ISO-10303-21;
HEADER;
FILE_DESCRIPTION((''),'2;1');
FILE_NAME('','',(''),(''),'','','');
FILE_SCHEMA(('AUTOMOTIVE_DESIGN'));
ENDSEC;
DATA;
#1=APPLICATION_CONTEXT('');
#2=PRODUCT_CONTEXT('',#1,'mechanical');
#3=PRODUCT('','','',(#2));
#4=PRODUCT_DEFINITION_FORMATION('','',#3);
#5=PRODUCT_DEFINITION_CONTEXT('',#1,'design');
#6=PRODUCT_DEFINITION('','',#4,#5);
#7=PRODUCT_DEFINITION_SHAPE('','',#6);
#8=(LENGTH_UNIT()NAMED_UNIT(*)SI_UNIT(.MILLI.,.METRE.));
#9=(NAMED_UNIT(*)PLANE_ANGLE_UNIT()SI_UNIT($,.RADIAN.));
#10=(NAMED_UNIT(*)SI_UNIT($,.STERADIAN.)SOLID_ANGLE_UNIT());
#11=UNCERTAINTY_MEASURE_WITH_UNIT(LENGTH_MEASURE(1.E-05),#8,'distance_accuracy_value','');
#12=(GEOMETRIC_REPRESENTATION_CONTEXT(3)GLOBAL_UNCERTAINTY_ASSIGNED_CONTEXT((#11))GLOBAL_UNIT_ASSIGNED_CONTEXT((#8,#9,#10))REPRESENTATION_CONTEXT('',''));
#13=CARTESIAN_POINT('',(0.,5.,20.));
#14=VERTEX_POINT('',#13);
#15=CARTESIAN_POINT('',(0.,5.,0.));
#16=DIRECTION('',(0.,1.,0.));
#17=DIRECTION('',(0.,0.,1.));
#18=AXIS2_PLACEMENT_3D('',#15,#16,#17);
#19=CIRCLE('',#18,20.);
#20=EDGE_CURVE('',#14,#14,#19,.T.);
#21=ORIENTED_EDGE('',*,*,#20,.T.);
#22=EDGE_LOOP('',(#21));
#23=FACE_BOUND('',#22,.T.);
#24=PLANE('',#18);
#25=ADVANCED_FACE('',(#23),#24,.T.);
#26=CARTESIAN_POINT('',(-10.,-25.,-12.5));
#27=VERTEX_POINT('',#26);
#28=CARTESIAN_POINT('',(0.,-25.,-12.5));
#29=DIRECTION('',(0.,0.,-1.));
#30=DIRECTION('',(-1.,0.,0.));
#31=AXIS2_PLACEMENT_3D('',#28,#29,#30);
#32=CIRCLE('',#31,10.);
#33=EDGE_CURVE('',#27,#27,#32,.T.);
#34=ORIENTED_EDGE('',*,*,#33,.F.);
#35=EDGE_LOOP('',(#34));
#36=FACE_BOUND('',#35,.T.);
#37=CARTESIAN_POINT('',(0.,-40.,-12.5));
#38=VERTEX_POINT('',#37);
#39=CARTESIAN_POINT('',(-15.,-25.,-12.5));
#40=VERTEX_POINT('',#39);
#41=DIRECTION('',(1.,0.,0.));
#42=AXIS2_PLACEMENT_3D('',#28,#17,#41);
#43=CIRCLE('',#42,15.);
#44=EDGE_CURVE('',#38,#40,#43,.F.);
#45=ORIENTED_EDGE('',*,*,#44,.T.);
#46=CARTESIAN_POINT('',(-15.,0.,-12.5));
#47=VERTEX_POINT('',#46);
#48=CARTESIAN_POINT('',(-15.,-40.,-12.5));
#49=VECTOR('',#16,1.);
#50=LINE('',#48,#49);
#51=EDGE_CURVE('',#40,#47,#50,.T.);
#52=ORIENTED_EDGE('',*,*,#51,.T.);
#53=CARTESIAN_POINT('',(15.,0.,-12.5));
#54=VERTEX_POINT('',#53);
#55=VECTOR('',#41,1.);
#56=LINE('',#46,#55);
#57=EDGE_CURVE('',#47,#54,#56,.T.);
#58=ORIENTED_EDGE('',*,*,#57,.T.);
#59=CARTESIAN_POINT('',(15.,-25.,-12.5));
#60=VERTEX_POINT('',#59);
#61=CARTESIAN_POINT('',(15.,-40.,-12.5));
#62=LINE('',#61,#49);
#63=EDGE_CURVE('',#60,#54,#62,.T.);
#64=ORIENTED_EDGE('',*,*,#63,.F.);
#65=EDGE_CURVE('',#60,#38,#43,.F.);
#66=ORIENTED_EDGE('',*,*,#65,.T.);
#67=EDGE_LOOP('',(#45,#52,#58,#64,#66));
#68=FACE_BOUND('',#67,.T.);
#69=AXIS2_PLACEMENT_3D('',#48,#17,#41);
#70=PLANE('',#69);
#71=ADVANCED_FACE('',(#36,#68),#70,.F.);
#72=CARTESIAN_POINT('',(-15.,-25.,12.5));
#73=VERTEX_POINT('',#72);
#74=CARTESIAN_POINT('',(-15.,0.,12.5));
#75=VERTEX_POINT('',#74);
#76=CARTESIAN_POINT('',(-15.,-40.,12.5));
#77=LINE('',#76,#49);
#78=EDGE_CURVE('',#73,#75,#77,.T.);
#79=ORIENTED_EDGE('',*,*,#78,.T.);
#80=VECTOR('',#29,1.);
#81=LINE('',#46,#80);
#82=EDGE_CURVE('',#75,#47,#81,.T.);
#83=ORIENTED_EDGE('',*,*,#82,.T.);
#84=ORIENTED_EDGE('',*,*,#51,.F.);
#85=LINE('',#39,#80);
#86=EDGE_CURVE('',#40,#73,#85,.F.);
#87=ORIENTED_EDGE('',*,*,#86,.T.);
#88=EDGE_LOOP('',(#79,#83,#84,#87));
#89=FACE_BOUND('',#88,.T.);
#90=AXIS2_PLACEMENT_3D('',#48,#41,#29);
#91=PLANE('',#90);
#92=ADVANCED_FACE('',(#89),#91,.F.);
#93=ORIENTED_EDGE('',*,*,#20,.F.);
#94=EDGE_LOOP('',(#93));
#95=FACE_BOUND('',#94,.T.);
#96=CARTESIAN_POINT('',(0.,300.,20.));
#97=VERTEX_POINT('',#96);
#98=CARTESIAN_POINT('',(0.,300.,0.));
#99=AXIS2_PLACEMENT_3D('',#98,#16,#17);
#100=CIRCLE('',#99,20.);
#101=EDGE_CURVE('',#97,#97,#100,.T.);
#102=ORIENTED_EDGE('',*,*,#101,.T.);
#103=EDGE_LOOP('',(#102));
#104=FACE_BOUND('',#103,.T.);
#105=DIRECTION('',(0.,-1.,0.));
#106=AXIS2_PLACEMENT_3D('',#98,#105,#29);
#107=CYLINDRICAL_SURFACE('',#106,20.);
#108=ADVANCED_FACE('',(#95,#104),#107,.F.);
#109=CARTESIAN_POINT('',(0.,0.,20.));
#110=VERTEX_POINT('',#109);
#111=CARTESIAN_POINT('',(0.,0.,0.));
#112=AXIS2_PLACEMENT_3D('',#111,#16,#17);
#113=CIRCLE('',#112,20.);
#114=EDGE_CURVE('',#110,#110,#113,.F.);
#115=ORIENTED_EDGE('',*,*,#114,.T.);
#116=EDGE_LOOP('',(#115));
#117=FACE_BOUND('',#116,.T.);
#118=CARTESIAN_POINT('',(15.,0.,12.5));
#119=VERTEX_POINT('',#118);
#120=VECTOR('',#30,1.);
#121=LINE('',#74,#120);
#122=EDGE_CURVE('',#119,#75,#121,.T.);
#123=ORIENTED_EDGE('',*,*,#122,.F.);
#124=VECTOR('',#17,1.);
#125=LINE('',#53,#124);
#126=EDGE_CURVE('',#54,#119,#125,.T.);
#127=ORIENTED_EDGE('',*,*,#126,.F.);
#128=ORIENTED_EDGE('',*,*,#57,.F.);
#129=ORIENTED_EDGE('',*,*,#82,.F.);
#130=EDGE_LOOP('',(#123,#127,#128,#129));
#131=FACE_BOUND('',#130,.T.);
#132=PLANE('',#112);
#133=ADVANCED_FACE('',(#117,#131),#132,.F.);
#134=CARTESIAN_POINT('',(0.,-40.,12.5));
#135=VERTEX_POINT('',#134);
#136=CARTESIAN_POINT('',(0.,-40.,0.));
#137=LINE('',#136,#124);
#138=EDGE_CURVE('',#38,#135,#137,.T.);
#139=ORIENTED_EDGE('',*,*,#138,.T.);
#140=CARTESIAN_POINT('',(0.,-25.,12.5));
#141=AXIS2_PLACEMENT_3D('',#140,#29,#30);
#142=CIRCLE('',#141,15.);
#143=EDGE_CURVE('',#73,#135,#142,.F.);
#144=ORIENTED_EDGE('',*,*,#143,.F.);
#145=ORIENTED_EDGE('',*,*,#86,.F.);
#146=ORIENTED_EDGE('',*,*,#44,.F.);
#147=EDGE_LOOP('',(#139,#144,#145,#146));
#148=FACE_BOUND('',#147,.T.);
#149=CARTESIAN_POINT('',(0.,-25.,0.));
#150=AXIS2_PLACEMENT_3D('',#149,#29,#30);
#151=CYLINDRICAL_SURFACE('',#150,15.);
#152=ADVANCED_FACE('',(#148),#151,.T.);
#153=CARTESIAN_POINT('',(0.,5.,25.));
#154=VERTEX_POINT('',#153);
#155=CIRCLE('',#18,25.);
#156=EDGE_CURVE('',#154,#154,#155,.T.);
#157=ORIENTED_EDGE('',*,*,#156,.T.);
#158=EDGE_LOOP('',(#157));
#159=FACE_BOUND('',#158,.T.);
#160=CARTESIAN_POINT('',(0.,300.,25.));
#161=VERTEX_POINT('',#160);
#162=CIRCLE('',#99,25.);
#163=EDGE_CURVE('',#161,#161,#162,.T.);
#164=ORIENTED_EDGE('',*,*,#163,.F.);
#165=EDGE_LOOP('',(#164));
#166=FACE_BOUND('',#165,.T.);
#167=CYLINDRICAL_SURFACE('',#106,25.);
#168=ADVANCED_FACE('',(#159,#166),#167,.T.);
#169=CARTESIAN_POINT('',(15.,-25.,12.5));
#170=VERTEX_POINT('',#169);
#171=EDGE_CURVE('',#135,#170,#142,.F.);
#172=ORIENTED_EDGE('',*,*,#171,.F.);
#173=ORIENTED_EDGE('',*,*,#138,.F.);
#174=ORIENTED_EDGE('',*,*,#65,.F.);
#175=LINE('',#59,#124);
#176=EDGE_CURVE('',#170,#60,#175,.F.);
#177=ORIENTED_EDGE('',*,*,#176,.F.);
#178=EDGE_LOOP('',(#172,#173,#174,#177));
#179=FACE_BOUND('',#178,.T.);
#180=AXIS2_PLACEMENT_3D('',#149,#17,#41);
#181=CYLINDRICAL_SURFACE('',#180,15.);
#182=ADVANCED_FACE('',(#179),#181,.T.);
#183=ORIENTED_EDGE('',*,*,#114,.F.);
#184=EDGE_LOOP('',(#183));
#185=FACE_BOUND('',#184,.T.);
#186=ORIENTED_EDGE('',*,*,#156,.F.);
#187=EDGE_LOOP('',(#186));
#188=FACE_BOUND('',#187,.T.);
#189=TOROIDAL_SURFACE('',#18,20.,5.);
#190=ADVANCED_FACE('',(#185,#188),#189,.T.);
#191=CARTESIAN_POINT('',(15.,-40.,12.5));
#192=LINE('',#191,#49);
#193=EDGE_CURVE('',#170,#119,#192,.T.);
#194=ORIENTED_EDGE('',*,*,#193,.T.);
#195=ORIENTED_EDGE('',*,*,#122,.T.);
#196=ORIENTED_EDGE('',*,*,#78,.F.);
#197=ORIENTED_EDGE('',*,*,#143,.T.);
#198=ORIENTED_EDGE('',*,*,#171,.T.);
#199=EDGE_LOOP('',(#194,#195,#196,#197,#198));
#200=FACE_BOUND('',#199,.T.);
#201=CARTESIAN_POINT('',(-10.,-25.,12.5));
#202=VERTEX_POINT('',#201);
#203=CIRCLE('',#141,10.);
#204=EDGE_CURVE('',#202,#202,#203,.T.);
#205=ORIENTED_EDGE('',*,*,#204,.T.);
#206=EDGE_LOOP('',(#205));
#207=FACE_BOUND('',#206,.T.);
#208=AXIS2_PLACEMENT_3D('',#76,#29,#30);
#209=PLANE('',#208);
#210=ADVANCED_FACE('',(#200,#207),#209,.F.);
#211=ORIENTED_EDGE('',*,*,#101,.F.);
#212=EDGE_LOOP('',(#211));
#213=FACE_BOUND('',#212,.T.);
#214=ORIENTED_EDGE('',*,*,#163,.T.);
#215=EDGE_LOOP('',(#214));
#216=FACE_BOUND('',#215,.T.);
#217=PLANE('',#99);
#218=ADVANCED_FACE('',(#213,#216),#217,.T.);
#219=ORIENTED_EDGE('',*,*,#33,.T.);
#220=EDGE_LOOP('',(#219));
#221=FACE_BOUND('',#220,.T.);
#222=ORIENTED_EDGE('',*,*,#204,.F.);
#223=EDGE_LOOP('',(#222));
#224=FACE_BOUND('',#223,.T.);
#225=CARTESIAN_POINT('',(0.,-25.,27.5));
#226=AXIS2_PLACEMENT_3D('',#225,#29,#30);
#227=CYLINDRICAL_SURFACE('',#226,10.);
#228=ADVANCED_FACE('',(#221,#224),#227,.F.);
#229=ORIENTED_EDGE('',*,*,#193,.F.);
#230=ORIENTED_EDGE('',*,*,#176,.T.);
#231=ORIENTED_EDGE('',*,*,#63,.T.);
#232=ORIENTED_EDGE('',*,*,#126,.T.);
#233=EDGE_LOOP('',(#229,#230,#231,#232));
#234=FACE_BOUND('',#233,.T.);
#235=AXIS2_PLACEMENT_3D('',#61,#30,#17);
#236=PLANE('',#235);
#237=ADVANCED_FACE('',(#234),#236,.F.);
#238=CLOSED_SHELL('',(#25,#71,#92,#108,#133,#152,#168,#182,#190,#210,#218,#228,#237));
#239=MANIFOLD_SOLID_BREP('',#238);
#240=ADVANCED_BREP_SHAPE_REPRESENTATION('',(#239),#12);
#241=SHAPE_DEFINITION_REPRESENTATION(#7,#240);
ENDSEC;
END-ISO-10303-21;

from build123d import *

# Parameters (mm, degrees)
SKETCH1_R           = 25
BOSS_EXTRUDE1_DEPTH = 300
SHELL1_T            = -5
FILLET1_R           = 5
SKETCH2_W           = 30
SKETCH2_H           = 25
BOSS_EXTRUDE2_DEPTH = 40
SKETCH3_R           = 10
CUT_EXTRUDE1_DEPTH  = 40
FILLET3_R           = 15


with BuildPart() as part:
    # Sketch1 → Boss-Extrude1 (new body)
    with BuildSketch(Plane(origin=(0, 0, 0), x_dir=(1, 0, 0), z_dir=(0, 1, 0))):
        with Locations(Location((0, 0, 0), (0, 0, 270))):
            Circle(SKETCH1_R)
    extrude(amount=BOSS_EXTRUDE1_DEPTH)

    # Shell1
    shell1_openings = [part.faces().sort_by_distance(p)[0] for p in [
        (0, 300, 0),
    ]]
    offset(amount=SHELL1_T, openings=shell1_openings, kind=Kind.INTERSECTION)

    # Fillet1
    fillet1_edges = [part.edges().sort_by_distance(p)[0] for p in [
        (0, 0, -25),
    ]]
    fillet(fillet1_edges, radius=FILLET1_R)

    # Sketch2 → Boss-Extrude2 (add)
    with BuildSketch(Plane.XZ):
        Rectangle(SKETCH2_W, SKETCH2_H)
    extrude(amount=BOSS_EXTRUDE2_DEPTH)

    # Sketch3 → Cut-Extrude1 (cut)
    with BuildSketch(Plane(origin=(0, 0, -12.5), x_dir=(-1, 0, 0), z_dir=(0, 0, -1))):
        with Locations((0, -25)):
            Circle(SKETCH3_R)
    extrude(amount=-CUT_EXTRUDE1_DEPTH, mode=Mode.SUBTRACT)

    # Fillet3
    fillet3_edges = [part.edges().sort_by_distance(p)[0] for p in [
        (-15, -40, 0),
        (15, -40, 0),
    ]]
    fillet(fillet3_edges, radius=FILLET3_R - 0.0001)  # a hair under: the kernel refuses the full size


solid = part.part
